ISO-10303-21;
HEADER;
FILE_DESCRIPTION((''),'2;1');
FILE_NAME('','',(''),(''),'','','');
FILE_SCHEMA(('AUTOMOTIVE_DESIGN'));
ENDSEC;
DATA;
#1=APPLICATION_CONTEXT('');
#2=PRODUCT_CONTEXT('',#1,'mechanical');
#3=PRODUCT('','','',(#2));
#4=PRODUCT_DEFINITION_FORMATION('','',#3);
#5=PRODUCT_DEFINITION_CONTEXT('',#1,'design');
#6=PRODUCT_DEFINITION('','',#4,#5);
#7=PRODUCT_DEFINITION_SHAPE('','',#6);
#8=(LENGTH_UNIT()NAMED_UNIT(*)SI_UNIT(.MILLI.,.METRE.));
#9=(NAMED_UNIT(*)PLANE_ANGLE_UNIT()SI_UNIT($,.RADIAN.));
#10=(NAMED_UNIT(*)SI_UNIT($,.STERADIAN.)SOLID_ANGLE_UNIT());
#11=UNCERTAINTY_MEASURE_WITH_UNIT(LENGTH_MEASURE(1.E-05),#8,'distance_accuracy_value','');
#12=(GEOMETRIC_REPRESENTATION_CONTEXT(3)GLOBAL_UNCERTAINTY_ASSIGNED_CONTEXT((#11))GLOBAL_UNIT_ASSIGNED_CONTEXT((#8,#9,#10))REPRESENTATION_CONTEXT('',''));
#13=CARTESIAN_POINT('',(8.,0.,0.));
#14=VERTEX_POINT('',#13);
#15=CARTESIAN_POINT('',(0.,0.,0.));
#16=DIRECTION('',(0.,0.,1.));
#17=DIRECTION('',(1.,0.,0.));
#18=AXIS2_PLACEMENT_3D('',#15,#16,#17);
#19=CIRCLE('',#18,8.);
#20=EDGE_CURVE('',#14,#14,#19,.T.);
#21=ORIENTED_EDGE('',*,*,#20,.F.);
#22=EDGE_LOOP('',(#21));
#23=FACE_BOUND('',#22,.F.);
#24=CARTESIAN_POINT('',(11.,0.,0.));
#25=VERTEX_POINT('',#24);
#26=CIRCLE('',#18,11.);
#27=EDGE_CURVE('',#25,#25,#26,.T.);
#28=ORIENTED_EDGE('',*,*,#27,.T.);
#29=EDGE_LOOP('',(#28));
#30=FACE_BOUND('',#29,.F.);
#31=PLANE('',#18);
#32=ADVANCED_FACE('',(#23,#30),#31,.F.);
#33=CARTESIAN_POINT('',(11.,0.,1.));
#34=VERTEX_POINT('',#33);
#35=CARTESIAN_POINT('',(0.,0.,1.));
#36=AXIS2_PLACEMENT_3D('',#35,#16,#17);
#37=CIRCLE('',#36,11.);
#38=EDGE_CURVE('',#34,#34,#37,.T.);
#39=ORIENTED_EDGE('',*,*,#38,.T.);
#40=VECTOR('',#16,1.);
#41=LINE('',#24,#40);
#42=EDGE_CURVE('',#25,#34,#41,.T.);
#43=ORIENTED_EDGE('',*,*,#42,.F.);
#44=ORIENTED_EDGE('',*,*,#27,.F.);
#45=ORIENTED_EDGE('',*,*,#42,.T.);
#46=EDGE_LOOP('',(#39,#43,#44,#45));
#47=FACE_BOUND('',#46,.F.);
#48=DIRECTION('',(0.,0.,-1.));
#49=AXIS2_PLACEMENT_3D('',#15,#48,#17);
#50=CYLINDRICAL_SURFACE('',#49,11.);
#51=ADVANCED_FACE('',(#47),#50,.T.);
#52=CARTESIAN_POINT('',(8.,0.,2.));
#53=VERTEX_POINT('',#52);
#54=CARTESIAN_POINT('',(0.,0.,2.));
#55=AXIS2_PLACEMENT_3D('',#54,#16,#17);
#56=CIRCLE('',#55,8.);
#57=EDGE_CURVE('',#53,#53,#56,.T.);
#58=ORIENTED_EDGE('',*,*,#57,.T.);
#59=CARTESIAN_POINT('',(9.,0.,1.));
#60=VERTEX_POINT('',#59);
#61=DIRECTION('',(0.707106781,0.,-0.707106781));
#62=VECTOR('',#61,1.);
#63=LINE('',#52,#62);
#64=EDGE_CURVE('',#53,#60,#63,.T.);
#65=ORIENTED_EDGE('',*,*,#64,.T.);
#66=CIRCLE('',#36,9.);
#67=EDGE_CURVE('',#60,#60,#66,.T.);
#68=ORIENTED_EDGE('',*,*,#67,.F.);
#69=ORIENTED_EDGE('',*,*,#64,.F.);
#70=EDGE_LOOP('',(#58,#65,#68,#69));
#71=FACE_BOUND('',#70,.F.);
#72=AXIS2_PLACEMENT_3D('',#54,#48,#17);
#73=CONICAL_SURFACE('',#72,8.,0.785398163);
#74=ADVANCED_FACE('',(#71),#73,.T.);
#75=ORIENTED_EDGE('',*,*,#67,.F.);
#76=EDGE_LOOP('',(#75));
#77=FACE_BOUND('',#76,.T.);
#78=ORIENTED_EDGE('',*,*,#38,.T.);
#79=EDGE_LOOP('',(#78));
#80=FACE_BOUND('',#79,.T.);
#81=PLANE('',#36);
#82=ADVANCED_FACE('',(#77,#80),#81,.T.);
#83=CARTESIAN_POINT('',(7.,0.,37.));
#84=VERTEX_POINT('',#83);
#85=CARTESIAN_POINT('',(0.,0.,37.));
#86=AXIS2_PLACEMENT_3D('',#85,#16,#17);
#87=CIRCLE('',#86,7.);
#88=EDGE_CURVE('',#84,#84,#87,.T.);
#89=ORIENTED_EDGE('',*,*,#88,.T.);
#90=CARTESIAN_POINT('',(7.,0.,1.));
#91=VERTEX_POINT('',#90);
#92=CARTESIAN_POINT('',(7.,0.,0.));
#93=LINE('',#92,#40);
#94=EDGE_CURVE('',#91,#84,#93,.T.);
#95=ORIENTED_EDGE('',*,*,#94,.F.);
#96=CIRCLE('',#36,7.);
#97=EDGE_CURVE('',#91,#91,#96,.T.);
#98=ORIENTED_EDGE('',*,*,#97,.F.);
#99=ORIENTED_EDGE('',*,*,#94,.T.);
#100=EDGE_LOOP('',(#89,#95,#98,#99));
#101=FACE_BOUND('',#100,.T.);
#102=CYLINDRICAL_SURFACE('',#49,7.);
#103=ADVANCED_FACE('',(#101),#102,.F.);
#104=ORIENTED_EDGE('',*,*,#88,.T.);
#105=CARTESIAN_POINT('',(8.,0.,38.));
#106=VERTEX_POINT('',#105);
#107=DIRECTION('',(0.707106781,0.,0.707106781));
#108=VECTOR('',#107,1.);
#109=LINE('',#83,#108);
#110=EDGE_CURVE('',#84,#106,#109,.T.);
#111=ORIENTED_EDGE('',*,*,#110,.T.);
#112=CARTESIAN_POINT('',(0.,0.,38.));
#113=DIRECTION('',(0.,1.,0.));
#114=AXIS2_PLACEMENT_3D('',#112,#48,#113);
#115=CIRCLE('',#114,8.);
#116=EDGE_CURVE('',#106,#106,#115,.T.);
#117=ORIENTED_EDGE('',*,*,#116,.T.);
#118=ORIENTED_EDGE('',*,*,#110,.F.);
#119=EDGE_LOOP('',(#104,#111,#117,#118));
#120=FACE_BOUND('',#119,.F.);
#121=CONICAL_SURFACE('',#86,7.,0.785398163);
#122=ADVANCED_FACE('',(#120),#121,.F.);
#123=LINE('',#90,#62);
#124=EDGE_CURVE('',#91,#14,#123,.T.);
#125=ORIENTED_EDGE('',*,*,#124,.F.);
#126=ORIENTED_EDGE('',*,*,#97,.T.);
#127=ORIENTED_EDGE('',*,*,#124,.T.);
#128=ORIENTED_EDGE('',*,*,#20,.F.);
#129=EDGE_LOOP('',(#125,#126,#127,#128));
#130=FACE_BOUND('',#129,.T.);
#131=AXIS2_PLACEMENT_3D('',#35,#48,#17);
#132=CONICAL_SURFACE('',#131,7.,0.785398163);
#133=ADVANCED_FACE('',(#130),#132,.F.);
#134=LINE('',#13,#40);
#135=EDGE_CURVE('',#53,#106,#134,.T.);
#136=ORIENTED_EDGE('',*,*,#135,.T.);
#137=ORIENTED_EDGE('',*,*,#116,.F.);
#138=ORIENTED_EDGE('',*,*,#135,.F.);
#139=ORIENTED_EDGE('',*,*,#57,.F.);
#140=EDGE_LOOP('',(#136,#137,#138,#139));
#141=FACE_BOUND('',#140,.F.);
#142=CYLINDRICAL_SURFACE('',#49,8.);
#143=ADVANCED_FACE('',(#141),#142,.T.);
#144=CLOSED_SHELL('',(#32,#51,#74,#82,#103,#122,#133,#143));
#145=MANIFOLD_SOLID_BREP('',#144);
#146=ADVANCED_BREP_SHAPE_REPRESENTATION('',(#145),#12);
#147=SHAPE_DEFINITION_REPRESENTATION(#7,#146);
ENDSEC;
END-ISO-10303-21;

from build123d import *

# Parameters (mm, degrees)
F0_R     = 11
F0_R_2   = 8
F1_DEPTH = 1
F0_R_3   = 7
F2_DEPTH = 39
F3_SIZE  = 1


# Not quite as in the source:
# - a fillet or chamfer that OpenCascade refuses, or shapes differently, is made with other operations: its cross-section is extruded or revolved along the edge and cut away or added


with BuildPart() as f1:
    # F0 (on Top) → F1 (new body)
    with BuildSketch(Plane.XY):
        Circle(F0_R)
        Circle(F0_R_2, mode=Mode.SUBTRACT)
    extrude(amount=F1_DEPTH)

    # F0 (on Top) → F2 (join)
    with BuildSketch(Plane.XY):
        Circle(F0_R_2)
        Circle(F0_R_3, mode=Mode.SUBTRACT)
    extrude(amount=F2_DEPTH)

    # F3
    f3_edges = [f1.edges().sort_by_distance(p)[0] for p in [
        (-8, 0, 1),
        (-7, 0, 0),
    ]]
    chamfer(f3_edges, length=F3_SIZE)

    # F4: chamfer of 2 on 1 edges, made by hand

    # F4_s1 → F4_t2 (revolve, cut)
    with BuildSketch(Plane.XZ):
        Polygon((7, 37), (9, 39), (7, 39), align=None)
    revolve(axis=Axis((0, 0, 39), (0, 0, 1)), mode=Mode.SUBTRACT)


solid = f1.part
